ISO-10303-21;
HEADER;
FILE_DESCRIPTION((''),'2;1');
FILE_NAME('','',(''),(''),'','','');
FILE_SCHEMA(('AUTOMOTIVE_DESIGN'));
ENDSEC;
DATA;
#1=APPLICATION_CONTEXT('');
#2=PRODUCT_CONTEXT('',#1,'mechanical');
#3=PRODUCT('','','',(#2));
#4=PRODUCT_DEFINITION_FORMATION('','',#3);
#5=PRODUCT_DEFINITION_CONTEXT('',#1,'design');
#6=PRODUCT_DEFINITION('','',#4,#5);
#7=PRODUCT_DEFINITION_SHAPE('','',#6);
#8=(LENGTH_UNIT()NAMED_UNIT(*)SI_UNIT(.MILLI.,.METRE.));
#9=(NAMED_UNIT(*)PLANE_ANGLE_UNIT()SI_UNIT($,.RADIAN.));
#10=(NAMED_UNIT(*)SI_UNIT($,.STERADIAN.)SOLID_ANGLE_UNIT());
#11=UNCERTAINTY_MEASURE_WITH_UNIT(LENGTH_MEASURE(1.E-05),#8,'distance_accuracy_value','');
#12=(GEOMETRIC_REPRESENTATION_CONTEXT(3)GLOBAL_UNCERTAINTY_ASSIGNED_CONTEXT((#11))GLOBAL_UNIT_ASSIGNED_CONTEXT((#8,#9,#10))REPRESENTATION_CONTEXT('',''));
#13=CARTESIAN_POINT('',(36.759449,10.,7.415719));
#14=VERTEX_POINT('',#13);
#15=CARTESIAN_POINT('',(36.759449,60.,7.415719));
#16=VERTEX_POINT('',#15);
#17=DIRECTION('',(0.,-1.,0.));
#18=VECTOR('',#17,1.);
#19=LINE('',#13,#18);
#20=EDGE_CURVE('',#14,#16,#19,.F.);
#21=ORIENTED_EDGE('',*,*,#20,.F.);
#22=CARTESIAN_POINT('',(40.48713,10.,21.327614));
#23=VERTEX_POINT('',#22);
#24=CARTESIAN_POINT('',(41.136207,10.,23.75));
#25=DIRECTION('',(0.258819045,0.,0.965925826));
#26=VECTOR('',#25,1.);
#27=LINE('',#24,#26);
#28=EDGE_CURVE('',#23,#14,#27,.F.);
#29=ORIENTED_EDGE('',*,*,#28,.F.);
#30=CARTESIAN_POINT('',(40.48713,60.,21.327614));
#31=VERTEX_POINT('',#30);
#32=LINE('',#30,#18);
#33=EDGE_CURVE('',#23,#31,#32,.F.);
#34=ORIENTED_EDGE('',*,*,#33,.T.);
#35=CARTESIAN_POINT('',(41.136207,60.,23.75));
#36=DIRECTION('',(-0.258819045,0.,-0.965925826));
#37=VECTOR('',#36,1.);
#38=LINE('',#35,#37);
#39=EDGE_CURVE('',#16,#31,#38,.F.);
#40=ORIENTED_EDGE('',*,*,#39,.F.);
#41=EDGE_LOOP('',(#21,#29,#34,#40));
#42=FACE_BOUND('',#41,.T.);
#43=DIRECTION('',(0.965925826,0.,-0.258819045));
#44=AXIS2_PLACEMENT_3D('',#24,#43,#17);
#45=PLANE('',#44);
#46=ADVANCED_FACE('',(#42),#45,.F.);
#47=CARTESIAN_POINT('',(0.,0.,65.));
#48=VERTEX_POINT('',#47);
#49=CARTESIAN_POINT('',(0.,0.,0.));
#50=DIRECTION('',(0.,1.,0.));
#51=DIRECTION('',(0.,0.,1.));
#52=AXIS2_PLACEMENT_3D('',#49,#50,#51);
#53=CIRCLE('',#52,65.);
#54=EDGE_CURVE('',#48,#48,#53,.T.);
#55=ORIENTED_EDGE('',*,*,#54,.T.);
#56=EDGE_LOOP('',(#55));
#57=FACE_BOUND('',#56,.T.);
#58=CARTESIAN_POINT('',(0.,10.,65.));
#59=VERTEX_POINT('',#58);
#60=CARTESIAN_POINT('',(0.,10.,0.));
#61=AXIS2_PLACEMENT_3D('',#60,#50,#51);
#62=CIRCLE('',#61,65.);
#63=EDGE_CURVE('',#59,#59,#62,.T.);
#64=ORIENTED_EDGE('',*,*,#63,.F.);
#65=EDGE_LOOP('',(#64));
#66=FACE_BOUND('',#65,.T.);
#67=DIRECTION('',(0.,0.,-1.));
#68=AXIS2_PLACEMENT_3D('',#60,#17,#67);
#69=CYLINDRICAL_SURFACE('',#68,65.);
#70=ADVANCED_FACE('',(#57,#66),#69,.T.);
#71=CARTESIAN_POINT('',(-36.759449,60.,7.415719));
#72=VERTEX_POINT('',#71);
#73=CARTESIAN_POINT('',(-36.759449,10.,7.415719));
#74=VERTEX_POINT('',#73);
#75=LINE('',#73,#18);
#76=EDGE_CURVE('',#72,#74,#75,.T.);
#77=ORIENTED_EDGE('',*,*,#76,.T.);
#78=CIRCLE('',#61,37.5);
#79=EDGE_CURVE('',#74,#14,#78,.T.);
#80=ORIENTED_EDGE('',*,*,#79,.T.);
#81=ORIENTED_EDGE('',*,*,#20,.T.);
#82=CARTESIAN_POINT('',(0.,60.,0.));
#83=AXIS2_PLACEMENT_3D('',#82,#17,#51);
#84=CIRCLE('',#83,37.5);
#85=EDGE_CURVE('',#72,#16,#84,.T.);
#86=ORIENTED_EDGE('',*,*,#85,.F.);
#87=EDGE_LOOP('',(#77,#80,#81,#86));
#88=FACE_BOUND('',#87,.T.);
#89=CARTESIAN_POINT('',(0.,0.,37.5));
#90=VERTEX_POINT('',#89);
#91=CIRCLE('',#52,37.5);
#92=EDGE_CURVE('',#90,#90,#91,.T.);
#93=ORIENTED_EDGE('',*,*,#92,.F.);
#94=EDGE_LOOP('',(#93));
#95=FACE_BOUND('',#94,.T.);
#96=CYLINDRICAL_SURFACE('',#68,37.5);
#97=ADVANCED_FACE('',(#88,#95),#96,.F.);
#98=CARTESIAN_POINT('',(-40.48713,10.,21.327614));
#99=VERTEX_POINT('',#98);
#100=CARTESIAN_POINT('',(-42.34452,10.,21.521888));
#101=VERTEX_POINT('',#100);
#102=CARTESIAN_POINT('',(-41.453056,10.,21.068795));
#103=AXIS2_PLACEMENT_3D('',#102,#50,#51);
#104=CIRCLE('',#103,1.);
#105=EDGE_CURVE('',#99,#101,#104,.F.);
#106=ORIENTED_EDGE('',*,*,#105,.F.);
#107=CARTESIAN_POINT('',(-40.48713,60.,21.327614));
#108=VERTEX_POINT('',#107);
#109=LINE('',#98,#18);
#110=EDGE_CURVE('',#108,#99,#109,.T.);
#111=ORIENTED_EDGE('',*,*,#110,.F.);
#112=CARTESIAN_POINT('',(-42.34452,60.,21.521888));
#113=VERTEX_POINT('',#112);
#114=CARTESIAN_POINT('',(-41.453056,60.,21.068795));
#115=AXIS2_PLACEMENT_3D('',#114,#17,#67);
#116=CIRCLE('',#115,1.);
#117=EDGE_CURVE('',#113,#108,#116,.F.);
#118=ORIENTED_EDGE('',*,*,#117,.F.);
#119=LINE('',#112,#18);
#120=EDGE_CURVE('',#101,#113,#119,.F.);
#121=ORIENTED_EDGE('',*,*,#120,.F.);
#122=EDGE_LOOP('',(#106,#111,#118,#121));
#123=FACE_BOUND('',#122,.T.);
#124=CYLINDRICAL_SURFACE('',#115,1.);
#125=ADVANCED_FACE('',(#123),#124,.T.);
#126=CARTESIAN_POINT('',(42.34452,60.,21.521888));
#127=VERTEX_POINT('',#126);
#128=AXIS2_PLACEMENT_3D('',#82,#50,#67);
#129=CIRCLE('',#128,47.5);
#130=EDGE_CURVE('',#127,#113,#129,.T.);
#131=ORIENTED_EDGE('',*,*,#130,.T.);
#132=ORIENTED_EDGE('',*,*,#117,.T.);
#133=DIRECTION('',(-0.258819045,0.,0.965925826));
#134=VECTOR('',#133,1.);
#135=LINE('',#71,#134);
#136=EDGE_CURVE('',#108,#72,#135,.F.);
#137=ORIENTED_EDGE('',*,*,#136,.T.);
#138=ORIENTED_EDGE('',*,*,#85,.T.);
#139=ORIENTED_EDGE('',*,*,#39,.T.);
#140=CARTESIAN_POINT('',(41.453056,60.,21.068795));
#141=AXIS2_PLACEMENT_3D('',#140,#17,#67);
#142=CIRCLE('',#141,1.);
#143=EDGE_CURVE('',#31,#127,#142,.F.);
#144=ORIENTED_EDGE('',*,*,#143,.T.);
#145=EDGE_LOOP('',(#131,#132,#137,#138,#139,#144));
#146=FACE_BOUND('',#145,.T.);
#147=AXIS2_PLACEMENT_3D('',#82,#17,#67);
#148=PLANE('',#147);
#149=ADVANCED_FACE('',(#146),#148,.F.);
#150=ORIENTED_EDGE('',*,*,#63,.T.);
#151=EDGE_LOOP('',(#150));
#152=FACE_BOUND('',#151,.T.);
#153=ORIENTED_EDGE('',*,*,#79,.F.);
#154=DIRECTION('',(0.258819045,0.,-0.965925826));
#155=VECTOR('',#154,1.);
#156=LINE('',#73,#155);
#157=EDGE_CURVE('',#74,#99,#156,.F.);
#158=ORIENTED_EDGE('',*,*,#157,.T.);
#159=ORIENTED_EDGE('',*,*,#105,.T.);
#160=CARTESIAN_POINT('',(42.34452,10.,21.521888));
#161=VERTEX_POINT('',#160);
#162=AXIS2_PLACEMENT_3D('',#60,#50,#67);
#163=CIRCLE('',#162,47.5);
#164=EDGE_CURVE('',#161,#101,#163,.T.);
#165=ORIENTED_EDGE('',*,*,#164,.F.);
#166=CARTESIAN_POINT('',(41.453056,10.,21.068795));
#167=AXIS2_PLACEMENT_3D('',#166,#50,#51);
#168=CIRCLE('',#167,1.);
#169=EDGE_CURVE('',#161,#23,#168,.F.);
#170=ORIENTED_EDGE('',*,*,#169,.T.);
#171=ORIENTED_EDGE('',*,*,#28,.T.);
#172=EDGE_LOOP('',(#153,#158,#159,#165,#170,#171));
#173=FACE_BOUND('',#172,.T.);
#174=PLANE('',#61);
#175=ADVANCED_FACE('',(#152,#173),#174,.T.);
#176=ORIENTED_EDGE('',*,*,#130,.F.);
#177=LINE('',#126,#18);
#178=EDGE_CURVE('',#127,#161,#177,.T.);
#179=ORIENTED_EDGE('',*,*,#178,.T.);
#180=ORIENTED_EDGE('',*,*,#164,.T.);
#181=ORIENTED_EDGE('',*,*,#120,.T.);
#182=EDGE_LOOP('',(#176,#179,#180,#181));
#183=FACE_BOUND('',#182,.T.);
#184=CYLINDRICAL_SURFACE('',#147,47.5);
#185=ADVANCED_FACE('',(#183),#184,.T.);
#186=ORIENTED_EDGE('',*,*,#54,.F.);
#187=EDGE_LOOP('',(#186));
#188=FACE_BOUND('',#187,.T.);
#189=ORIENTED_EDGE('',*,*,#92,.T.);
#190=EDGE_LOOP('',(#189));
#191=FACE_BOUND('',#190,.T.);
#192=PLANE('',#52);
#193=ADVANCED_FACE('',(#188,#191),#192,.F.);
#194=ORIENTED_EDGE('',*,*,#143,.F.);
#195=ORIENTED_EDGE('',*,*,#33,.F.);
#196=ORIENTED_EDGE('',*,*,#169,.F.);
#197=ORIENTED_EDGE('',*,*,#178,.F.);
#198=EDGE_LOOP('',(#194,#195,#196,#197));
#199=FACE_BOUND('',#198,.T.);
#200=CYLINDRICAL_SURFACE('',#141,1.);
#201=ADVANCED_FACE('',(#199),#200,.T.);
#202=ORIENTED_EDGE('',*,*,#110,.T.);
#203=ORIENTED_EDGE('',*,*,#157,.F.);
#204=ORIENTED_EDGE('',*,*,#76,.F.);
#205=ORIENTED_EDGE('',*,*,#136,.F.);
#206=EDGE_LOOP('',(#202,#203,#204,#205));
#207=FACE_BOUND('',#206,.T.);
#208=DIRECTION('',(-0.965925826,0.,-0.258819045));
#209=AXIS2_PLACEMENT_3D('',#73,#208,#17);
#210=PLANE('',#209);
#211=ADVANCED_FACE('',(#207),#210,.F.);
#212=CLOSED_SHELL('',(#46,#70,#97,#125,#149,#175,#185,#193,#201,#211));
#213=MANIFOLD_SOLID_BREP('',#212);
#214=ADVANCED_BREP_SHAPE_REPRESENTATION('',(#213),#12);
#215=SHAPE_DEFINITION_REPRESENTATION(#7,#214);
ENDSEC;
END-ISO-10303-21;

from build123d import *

# Parameters (mm, degrees)
SKETCH_2_R      = 65
SKETCH_2_R_2    = 37.5
EXTRUDE_1_DEPTH = 10
EXTRUDE_2_DEPTH = 50
CHAMFER_1_SIZE  = 10
FILLET_2_R      = 1


with BuildPart() as part:
    # 草圖2 → 填料-伸長1 (new body)
    with BuildSketch(Plane(origin=(0, 0, 0), x_dir=(1, 0, 0), z_dir=(0, 1, 0))):
        with Locations(Location((0, 0, 0), (0, 0, 270))):
            Circle(SKETCH_2_R)
        with Locations(Location((0, 0, 0), (0, 0, 270))):
            Circle(SKETCH_2_R_2, mode=Mode.SUBTRACT)
    extrude(amount=EXTRUDE_1_DEPTH)

    # 草圖3 → 填料-伸長2 (add)
    with BuildSketch(Plane(origin=(0, 10, 0), x_dir=(1, 0, 0), z_dir=(0, 1, 0))):
        with BuildLine():
            Line((-32.475952642, -18.75), (-41.13620668, -23.75))
            ThreePointArc((-41.13620668, -23.75), (0, 47.5), (41.13620668, -23.75))
            Line((41.13620668, -23.75), (32.475952642, -18.75))
            ThreePointArc((32.475952642, -18.75), (0, 37.5), (-32.475952642, -18.75))
        make_face()
    extrude(amount=EXTRUDE_2_DEPTH)

    # 導角1
    # the kernel refuses this chamfer: 10 mm, written as the material it takes off along each edge
    with BuildSketch(Plane(origin=(32.475952642, 10, 18.75), x_dir=(0.35352025121745984, 0, -0.935426871529327), z_dir=(0, 1, 0))) as chamfer_1_piece_1:
        with BuildLine():
            Line((12.116693809, 0), (-CHAMFER_1_SIZE * 0.161555917458, -CHAMFER_1_SIZE * 0.986863559736))
            Line((-CHAMFER_1_SIZE * 0.161555917458, -CHAMFER_1_SIZE * 0.986863559736), (0, 0))
            ThreePointArc((0, 0), (6.22343893, -0.492253103), (12.116693809, 0))
        make_face()
    extrude(amount=81.109263918, mode=Mode.SUBTRACT)
    with BuildSketch(Plane(origin=(-32.475952642, 10, 18.75), x_dir=(-0.3535202512174606, 0, -0.9354268715293267), z_dir=(0, 1, 0))) as chamfer_1_piece_2:
        with BuildLine():
            Line((12.116693809, 0), (-CHAMFER_1_SIZE * 0.161555917458, CHAMFER_1_SIZE * 0.986863559736))
            Line((-CHAMFER_1_SIZE * 0.161555917458, CHAMFER_1_SIZE * 0.986863559736), (0, 0))
            ThreePointArc((0, 0), (6.22343893, 0.492253103), (12.116693809, 0))
        make_face()
    extrude(amount=81.109263918, mode=Mode.SUBTRACT)

    # 圓角2
    fillet_2_edges = [part.edges().sort_by_distance(p)[0] for p in [
        (41.13620668, 35, 23.75),
        (-41.13620668, 35, 23.75),
    ]]
    fillet(fillet_2_edges, radius=FILLET_2_R)


solid = part.part
